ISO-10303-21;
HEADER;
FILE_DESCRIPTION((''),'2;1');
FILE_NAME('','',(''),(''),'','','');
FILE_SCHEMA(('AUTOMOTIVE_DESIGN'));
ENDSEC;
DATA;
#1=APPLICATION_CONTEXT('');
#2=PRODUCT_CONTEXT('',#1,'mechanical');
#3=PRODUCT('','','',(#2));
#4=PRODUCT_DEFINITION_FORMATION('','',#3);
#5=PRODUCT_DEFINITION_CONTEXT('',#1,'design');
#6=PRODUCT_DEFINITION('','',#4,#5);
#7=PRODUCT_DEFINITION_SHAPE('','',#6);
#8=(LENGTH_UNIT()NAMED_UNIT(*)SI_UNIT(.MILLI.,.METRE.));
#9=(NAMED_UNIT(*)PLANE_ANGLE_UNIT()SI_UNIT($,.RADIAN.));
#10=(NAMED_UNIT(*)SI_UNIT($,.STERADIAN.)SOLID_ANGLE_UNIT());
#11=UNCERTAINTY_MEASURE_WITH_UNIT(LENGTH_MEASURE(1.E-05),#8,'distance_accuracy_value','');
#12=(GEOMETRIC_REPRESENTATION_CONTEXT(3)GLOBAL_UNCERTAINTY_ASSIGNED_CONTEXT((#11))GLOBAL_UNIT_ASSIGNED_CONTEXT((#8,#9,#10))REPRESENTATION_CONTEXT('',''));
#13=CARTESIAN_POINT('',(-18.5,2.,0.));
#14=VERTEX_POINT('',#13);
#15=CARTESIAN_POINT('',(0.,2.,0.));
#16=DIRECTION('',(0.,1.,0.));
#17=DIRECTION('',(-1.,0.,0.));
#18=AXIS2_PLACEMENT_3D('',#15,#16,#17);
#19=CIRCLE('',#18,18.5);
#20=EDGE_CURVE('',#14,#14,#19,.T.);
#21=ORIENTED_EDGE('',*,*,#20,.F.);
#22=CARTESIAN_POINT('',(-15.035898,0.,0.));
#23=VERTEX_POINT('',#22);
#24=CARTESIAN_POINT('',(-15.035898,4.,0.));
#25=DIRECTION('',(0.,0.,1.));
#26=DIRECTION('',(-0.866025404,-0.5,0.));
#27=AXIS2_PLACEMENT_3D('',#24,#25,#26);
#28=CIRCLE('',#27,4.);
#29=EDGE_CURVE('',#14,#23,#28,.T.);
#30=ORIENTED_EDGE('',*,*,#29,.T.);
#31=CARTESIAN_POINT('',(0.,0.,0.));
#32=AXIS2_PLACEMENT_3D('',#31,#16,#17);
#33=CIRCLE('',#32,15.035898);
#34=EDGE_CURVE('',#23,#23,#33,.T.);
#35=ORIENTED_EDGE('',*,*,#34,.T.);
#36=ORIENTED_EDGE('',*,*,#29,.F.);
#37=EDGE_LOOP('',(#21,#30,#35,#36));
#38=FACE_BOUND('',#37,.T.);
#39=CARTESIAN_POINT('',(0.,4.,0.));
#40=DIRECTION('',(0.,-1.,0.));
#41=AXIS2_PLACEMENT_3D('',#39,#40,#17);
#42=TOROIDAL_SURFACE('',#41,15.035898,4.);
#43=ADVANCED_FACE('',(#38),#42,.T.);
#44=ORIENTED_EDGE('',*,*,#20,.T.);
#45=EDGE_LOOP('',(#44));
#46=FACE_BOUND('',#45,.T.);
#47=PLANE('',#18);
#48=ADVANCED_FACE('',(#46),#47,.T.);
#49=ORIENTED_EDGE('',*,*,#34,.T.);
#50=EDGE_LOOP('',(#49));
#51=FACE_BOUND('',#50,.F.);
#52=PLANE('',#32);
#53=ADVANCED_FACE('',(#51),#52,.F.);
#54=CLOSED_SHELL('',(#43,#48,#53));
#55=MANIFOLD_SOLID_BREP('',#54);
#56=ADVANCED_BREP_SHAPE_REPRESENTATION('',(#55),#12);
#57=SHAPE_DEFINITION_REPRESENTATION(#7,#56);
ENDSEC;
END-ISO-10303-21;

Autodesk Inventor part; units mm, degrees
ref_plane "YZ Plane" through (0, 0, 0) normal (1, 0, 0) x (0, 1, 0)
ref_plane "XZ Plane" through (0, 0, 0) normal (0, 1, 0) x (-1, 0, 0)
ref_plane "XY Plane" through (0, 0, 0) normal (0, 0, 1) x (1, 0, 0)
sketch "Boceto1" plane through (0, 0, 0) normal (0, 1, 0) x (-1, 0, 0)
  circle A0 centre (0, 0) radius 18.5
  dimension "d0" = 37
extrude "Extrusión1" add sketch "Boceto1" along normal blind 2
fillet "Empalme1" radius 4 1 edges at (18.5, 0, 0)
properties part number "tapapieza 38"
